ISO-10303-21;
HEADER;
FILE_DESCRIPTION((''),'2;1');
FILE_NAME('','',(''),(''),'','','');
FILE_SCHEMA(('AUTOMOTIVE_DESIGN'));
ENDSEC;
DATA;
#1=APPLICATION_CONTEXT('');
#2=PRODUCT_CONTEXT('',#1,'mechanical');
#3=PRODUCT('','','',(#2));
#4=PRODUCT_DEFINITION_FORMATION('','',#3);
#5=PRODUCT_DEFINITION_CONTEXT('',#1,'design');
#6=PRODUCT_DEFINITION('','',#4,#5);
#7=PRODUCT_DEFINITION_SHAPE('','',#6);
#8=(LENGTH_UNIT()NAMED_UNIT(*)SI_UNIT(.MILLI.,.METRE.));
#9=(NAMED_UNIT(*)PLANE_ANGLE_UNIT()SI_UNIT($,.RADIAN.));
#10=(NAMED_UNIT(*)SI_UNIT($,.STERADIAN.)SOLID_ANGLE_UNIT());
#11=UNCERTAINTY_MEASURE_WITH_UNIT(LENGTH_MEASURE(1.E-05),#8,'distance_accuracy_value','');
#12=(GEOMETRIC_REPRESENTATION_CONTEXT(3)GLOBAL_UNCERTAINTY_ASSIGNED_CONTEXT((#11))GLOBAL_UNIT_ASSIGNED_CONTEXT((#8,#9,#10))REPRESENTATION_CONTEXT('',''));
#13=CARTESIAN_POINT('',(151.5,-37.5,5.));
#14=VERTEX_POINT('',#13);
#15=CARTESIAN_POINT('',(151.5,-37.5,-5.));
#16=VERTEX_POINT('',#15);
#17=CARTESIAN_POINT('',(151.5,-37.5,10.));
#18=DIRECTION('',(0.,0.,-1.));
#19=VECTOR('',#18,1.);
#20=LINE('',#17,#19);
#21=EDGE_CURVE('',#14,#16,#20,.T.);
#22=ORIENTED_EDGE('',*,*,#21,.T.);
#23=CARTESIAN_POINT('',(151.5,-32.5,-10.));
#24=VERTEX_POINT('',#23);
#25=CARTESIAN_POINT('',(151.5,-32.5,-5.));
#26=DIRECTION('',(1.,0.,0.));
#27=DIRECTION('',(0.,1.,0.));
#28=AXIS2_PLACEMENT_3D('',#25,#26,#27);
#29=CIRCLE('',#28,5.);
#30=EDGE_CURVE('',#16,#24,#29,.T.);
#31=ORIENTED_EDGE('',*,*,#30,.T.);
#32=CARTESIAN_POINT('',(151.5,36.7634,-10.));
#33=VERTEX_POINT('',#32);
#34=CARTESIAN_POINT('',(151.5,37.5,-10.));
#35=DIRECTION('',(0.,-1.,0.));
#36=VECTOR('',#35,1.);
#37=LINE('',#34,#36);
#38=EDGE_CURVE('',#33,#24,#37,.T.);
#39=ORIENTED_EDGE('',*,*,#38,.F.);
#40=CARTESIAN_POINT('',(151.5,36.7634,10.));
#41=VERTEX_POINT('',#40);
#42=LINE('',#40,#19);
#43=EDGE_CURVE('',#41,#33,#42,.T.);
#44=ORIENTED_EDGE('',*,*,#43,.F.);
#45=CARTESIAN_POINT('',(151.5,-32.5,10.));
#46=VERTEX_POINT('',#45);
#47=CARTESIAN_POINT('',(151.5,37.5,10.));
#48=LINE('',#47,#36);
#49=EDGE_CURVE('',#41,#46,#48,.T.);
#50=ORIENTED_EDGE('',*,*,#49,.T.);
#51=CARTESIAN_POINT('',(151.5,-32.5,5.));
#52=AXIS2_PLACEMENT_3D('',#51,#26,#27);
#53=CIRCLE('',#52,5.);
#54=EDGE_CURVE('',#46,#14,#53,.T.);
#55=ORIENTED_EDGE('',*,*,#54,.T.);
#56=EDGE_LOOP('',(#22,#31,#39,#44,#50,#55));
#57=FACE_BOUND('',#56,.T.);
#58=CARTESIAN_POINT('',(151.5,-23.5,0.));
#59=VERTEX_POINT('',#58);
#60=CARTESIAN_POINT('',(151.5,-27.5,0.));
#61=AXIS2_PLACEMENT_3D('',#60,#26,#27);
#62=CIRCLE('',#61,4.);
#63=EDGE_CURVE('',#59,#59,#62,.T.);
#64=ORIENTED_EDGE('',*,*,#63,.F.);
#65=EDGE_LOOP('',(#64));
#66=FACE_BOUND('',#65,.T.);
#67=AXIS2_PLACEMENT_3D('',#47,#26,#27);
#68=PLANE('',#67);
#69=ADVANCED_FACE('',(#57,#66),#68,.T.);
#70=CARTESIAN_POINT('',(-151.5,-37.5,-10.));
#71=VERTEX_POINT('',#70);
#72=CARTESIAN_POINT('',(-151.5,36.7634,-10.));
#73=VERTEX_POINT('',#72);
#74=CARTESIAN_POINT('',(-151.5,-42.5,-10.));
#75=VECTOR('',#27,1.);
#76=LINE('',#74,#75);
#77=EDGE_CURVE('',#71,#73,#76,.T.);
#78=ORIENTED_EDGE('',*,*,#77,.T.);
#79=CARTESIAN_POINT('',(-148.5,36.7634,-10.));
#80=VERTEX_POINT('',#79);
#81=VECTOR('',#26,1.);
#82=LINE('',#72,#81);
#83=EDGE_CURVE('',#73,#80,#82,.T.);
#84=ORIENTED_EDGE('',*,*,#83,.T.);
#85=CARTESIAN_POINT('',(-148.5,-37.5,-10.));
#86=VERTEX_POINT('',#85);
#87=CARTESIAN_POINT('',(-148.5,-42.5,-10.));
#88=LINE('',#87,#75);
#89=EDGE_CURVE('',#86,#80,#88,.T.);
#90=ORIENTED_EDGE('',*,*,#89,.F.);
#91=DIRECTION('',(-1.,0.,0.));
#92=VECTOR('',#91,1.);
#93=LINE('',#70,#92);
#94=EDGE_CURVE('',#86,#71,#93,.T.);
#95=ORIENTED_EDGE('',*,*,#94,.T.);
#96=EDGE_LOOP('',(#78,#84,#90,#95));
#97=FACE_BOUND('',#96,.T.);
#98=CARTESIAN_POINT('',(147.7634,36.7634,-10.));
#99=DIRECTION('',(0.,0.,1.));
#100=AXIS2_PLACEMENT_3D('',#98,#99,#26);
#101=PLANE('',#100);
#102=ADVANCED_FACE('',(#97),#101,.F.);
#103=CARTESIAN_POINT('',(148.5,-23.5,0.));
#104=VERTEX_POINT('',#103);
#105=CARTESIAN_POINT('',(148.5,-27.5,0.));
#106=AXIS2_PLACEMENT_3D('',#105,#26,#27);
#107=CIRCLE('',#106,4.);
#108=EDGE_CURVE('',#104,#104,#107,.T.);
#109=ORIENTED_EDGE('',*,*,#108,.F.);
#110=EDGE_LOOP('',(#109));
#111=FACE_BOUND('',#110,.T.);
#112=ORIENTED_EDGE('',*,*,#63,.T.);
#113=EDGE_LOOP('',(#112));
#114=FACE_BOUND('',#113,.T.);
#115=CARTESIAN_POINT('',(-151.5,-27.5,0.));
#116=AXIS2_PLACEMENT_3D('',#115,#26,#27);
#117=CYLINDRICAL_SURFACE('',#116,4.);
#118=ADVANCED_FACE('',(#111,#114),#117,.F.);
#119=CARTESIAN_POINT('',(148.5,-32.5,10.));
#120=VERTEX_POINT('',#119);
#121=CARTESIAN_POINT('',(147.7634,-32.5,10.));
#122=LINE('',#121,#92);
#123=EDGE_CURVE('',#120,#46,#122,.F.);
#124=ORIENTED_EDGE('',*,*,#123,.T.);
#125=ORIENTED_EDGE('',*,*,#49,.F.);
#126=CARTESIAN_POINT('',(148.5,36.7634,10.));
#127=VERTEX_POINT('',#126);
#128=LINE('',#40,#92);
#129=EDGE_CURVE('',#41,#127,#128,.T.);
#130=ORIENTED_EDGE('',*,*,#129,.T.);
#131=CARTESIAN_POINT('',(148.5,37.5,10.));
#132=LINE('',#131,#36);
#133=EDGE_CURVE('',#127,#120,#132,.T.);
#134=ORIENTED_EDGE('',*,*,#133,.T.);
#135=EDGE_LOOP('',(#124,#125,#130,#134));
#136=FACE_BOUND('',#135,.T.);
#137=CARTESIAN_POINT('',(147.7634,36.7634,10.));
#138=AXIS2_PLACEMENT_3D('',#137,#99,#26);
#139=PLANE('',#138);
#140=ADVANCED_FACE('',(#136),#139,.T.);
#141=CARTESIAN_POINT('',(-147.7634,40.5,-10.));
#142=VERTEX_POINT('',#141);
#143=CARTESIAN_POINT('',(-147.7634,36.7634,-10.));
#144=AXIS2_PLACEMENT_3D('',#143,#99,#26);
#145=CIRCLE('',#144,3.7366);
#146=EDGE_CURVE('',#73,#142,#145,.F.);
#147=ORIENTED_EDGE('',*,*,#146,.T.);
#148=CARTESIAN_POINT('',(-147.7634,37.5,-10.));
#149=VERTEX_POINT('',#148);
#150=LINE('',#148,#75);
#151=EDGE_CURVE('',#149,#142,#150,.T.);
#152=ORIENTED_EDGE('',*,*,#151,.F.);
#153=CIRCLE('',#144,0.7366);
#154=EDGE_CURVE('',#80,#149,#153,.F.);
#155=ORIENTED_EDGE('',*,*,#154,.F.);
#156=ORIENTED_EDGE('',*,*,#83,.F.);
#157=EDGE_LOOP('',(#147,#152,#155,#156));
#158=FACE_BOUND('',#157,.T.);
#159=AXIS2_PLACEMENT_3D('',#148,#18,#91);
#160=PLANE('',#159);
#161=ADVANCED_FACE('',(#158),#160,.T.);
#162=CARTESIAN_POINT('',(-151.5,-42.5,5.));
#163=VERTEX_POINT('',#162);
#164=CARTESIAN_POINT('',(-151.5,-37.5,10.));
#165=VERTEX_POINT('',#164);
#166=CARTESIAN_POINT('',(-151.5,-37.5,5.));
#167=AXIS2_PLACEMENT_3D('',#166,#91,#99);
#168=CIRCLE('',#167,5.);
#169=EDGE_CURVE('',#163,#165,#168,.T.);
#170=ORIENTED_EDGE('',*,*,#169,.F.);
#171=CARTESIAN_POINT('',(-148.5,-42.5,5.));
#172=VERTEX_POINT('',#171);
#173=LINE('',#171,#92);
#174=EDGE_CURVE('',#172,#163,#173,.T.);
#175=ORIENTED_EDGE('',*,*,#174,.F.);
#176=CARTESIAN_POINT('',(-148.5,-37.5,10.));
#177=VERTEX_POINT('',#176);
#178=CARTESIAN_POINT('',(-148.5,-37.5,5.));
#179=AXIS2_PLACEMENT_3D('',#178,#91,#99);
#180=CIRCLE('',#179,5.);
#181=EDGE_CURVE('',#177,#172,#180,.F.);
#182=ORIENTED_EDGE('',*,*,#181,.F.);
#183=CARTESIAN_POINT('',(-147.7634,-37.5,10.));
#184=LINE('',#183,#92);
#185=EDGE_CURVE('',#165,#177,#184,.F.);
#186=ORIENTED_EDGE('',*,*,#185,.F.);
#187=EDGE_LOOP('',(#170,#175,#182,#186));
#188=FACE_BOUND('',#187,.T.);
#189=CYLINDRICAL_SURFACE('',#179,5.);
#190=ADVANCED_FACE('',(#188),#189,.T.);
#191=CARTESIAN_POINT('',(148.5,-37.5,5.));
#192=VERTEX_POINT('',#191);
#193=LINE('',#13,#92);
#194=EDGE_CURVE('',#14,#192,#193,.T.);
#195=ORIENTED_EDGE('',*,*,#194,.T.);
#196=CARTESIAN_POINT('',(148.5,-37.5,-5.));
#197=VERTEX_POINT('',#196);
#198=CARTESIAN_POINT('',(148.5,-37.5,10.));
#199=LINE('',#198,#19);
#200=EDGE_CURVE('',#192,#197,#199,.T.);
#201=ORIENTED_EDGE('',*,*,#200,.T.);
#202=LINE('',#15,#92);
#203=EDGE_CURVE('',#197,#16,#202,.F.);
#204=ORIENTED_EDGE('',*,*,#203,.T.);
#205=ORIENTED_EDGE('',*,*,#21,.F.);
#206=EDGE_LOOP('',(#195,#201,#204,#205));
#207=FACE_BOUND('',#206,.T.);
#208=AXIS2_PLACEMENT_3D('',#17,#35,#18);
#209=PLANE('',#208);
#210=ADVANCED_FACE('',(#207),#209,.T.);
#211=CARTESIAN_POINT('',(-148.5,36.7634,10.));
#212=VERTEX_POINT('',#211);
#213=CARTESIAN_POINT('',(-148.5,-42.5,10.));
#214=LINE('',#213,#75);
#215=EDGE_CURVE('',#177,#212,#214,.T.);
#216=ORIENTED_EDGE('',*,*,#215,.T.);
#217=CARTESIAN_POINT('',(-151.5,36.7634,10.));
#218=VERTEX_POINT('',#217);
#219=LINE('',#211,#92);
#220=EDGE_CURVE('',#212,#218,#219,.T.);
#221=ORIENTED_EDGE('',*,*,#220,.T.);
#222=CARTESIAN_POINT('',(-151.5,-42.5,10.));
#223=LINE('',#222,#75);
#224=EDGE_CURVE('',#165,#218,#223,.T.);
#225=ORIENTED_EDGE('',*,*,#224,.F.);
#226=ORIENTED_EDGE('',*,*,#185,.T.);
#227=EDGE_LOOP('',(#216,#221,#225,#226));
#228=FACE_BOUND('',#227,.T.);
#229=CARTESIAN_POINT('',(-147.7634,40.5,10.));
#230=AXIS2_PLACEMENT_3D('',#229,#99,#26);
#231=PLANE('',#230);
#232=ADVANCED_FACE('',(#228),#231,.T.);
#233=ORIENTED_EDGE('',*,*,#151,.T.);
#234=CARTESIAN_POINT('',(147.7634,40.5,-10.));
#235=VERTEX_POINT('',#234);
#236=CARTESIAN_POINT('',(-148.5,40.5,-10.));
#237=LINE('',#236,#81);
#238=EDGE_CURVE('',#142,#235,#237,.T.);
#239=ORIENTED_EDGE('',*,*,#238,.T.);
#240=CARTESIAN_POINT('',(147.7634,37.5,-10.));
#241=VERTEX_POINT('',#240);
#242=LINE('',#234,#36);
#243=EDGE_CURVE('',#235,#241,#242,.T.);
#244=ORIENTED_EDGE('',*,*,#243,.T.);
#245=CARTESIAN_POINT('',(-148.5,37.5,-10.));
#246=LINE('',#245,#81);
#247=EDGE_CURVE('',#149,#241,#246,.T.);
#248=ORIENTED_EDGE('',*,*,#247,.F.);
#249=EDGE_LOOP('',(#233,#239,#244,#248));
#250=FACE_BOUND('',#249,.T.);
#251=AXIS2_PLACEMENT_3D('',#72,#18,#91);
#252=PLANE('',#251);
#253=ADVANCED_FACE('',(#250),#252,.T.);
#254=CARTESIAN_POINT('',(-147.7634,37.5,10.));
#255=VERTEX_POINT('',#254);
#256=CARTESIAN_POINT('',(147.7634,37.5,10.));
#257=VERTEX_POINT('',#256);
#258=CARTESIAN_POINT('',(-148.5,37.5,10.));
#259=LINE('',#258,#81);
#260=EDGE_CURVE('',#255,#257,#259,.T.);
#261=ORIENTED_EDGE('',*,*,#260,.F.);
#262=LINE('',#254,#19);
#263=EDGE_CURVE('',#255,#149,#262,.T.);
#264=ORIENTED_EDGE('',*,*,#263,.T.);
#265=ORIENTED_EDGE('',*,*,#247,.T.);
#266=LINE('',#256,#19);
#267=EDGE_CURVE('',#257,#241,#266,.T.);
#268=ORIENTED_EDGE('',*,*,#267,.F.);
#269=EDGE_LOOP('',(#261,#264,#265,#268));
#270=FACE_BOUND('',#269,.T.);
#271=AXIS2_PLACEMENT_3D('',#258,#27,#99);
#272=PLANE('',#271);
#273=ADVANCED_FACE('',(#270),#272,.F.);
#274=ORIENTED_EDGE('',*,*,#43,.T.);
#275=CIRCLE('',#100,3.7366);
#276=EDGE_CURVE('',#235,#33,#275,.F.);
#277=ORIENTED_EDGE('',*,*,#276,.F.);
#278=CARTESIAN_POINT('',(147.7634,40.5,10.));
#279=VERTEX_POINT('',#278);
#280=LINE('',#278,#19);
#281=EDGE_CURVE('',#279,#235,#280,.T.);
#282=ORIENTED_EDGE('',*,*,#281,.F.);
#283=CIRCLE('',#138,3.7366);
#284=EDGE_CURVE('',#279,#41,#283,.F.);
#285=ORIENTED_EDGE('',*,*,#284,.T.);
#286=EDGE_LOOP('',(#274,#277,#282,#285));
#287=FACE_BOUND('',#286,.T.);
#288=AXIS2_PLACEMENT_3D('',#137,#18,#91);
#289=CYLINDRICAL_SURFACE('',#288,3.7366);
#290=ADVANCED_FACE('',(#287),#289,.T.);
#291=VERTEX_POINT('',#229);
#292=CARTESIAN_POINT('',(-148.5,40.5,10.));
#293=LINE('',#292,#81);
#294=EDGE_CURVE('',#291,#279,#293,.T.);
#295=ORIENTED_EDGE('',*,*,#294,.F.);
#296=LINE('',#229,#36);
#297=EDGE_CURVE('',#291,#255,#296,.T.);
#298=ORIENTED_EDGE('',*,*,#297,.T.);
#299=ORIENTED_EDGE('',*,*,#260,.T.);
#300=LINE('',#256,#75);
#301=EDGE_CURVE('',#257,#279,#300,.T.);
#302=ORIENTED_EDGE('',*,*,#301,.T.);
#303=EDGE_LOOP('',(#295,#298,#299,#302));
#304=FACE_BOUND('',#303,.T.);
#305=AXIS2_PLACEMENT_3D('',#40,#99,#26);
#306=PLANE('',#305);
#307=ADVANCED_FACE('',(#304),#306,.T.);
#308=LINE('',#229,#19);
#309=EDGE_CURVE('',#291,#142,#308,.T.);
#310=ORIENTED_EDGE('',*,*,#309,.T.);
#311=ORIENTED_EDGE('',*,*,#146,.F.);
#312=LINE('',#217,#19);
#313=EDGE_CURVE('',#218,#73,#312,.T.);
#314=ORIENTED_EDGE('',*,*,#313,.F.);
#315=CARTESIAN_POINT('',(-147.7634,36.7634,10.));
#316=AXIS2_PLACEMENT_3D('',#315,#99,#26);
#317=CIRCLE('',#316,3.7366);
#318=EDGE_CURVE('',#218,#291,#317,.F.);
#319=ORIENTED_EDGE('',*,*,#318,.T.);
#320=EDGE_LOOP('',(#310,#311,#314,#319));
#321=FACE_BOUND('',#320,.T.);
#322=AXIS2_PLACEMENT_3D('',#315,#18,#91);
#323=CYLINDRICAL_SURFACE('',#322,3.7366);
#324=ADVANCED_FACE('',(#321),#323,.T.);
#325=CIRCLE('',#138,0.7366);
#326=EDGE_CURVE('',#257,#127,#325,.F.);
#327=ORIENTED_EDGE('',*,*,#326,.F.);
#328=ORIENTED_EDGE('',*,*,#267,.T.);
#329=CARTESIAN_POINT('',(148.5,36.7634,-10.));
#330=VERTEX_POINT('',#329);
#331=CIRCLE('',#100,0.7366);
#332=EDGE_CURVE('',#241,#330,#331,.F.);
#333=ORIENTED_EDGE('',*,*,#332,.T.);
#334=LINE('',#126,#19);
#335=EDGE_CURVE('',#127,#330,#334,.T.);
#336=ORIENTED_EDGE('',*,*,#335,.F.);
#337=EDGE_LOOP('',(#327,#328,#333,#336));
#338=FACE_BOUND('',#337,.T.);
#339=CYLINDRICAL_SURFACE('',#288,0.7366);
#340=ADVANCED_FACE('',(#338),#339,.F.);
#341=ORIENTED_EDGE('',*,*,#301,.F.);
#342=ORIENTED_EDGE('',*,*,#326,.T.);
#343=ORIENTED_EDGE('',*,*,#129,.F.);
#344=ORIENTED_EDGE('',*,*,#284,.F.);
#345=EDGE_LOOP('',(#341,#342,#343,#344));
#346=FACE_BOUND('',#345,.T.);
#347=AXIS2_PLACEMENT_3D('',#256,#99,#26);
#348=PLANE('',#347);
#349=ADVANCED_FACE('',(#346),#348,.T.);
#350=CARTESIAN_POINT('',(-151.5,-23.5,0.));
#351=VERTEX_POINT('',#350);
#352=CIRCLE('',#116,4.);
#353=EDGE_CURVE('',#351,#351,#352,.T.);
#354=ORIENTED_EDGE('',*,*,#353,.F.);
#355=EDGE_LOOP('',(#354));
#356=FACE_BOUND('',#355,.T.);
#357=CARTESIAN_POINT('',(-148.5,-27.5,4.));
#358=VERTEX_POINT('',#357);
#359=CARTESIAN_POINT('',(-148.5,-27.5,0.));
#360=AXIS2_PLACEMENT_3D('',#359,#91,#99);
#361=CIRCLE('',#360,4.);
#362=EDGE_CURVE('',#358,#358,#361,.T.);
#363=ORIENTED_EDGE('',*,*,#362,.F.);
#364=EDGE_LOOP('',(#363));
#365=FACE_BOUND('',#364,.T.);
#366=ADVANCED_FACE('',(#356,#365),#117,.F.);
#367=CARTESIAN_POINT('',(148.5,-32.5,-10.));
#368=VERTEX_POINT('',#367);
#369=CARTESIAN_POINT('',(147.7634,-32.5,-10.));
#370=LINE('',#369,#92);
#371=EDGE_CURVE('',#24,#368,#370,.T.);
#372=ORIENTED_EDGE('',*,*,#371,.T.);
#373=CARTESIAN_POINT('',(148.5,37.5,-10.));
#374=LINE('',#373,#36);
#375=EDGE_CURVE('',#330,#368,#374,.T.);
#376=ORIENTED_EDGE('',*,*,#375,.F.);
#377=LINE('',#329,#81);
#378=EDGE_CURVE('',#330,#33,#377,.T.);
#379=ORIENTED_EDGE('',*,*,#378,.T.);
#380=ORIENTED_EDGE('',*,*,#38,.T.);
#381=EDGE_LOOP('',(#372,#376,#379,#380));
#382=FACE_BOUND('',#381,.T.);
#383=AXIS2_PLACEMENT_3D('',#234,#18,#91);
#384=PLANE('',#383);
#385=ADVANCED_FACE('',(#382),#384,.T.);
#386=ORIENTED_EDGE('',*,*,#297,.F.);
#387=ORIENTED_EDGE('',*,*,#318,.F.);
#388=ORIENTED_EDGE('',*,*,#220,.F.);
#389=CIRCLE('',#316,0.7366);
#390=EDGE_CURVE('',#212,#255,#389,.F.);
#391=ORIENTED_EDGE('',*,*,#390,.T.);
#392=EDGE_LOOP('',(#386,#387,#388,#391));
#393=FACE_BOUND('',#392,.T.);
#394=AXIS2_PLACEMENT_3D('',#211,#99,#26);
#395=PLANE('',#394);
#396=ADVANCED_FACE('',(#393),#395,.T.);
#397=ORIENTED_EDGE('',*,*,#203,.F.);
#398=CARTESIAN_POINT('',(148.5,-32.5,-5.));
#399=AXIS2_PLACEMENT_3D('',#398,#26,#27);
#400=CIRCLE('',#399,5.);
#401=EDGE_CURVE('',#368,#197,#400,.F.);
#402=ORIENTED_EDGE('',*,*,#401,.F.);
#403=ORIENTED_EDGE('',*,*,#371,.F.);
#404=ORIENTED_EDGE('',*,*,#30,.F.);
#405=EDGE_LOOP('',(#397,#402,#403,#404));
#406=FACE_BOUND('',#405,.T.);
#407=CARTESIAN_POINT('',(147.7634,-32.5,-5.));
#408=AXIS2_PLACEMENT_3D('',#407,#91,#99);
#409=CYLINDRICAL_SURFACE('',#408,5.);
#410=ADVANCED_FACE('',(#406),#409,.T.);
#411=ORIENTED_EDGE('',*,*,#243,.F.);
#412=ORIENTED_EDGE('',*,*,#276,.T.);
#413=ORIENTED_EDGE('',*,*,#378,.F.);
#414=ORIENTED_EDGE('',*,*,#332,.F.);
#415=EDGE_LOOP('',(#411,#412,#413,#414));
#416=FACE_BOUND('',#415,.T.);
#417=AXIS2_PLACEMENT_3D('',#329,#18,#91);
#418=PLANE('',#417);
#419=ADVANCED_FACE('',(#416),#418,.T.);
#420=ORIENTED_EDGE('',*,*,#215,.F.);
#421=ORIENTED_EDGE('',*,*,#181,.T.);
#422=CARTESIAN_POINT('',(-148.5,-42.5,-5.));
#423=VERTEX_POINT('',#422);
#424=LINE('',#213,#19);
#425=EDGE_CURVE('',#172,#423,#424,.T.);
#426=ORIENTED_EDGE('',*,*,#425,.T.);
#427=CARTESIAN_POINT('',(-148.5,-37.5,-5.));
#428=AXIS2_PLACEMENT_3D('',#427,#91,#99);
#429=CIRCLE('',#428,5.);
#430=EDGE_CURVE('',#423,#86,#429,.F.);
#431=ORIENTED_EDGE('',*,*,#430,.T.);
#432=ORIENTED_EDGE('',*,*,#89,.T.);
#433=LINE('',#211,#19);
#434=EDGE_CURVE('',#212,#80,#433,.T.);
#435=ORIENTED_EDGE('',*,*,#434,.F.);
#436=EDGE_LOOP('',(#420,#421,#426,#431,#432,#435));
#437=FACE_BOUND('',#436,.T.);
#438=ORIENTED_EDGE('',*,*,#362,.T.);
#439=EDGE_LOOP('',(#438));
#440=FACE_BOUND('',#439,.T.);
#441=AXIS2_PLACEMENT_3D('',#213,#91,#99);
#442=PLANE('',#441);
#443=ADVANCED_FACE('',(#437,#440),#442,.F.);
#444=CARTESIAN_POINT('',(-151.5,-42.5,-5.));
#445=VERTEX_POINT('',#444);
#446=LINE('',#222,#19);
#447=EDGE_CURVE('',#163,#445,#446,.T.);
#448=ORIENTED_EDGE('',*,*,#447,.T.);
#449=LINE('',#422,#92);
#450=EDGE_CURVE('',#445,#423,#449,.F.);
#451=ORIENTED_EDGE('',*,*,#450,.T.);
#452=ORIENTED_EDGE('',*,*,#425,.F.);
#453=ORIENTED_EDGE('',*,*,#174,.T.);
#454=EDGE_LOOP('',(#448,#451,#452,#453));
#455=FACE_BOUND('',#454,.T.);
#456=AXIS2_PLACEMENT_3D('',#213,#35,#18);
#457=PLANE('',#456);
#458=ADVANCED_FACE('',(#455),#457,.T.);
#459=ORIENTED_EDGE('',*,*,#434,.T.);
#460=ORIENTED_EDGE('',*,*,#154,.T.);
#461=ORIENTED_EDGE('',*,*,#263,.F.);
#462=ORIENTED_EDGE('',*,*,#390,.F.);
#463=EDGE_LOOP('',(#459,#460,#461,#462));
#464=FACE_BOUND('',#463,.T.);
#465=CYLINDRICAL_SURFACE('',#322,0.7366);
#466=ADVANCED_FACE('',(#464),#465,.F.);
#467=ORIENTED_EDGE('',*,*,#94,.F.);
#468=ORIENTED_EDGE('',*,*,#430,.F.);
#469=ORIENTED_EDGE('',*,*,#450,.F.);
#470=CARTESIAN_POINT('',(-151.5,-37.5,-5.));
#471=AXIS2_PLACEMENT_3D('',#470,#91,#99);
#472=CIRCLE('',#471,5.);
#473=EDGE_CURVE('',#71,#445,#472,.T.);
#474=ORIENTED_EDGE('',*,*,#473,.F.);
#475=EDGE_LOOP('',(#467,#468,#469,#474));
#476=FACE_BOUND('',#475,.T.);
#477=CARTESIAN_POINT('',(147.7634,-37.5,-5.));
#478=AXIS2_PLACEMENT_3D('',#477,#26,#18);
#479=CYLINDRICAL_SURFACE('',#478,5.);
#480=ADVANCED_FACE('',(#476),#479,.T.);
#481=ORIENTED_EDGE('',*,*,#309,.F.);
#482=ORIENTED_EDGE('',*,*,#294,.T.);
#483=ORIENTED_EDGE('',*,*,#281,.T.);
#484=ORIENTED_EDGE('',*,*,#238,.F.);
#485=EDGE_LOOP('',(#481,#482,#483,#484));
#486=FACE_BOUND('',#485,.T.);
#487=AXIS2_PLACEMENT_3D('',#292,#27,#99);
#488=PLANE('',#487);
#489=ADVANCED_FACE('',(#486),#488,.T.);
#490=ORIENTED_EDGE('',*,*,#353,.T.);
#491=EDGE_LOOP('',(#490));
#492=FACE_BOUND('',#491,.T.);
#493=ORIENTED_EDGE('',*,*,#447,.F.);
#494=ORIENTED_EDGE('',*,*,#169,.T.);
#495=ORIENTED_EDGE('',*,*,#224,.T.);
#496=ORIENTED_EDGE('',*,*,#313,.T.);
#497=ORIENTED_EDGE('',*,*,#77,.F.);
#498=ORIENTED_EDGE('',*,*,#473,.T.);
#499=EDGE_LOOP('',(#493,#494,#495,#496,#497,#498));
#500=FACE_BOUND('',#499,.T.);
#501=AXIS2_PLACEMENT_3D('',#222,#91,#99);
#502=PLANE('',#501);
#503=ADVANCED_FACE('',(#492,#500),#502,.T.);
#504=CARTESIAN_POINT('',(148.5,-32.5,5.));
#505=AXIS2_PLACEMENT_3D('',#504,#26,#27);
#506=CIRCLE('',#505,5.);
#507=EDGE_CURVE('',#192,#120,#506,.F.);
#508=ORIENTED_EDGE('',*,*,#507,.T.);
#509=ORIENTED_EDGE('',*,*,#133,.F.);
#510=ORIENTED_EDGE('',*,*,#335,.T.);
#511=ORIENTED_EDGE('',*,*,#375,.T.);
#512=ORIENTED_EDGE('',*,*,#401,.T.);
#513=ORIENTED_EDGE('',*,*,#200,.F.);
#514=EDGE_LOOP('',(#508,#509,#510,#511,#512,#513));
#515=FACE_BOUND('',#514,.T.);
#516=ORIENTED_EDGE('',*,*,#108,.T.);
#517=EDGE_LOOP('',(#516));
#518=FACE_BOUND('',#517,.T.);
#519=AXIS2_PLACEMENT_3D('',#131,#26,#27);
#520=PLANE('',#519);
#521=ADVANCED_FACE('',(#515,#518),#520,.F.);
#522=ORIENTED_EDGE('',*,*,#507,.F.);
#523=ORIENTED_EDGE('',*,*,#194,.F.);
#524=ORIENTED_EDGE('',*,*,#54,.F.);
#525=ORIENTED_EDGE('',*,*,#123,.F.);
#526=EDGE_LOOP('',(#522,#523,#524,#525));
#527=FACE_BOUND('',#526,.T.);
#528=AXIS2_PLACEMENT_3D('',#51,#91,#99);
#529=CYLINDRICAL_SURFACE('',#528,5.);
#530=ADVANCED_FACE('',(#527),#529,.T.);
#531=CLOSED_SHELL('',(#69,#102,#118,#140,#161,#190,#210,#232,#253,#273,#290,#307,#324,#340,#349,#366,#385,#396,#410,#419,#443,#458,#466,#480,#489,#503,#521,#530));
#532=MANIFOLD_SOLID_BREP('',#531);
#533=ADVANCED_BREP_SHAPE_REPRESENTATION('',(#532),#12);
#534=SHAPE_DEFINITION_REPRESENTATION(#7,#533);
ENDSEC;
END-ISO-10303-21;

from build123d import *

# Parameters (mm, degrees)
BASE_FLANGE1_DEPTH = 10
SKETCH3_R          = 4
CUT_EXTRUDE1_DEPTH = 307.129466076
FILLET1_R          = 5


# Sheet-metal steps are written as plain solids
with BuildPart() as part:
    # Sketch1 → Base-Flange1 (new, symmetric)
    with BuildSketch(Plane.XY):
        with BuildLine():
            Line((-148.5, -42.5), (-148.5, 36.7634))
            ThreePointArc((-148.5, 36.7634), (-148.284254855, 37.284254855), (-147.7634, 37.5))
            Line((-147.7634, 37.5), (147.7634, 37.5))
            ThreePointArc((147.7634, 37.5), (148.284254855, 37.284254855), (148.5, 36.7634))
            Line((148.5, 36.7634), (148.5, -37.5))
            Line((148.5, -37.5), (151.5, -37.5))
            Line((151.5, -37.5), (151.5, 36.7634))
            ThreePointArc((151.5, 36.7634), (150.405575199, 39.405575199), (147.7634, 40.5))
            Line((147.7634, 40.5), (-147.7634, 40.5))
            ThreePointArc((-147.7634, 40.5), (-150.405575199, 39.405575199), (-151.5, 36.7634))
            Line((-151.5, 36.7634), (-151.5, -42.5))
            Line((-151.5, -42.5), (-148.5, -42.5))
        make_face()
    extrude(amount=BASE_FLANGE1_DEPTH, both=True)

    # Sketch3 → Cut-Extrude1 (cut, through all)
    with BuildSketch(Plane(origin=(151.5, 0, 0), x_dir=(0, 0, -1), z_dir=(1, 0, 0))):
        with Locations(Location((0, -27.5, 0), (0, 0, 90))):
            Circle(SKETCH3_R)
    extrude(amount=-CUT_EXTRUDE1_DEPTH, mode=Mode.SUBTRACT)

    # Fillet1
    fillet1_edges = [part.edges().sort_by_distance(p)[0] for p in [
        (150, -37.5, -10),
        (150, -37.5, 10),
        (-150, -42.5, -10),
        (-150, -42.5, 10),
    ]]
    fillet(fillet1_edges, radius=FILLET1_R)


solid = part.part
